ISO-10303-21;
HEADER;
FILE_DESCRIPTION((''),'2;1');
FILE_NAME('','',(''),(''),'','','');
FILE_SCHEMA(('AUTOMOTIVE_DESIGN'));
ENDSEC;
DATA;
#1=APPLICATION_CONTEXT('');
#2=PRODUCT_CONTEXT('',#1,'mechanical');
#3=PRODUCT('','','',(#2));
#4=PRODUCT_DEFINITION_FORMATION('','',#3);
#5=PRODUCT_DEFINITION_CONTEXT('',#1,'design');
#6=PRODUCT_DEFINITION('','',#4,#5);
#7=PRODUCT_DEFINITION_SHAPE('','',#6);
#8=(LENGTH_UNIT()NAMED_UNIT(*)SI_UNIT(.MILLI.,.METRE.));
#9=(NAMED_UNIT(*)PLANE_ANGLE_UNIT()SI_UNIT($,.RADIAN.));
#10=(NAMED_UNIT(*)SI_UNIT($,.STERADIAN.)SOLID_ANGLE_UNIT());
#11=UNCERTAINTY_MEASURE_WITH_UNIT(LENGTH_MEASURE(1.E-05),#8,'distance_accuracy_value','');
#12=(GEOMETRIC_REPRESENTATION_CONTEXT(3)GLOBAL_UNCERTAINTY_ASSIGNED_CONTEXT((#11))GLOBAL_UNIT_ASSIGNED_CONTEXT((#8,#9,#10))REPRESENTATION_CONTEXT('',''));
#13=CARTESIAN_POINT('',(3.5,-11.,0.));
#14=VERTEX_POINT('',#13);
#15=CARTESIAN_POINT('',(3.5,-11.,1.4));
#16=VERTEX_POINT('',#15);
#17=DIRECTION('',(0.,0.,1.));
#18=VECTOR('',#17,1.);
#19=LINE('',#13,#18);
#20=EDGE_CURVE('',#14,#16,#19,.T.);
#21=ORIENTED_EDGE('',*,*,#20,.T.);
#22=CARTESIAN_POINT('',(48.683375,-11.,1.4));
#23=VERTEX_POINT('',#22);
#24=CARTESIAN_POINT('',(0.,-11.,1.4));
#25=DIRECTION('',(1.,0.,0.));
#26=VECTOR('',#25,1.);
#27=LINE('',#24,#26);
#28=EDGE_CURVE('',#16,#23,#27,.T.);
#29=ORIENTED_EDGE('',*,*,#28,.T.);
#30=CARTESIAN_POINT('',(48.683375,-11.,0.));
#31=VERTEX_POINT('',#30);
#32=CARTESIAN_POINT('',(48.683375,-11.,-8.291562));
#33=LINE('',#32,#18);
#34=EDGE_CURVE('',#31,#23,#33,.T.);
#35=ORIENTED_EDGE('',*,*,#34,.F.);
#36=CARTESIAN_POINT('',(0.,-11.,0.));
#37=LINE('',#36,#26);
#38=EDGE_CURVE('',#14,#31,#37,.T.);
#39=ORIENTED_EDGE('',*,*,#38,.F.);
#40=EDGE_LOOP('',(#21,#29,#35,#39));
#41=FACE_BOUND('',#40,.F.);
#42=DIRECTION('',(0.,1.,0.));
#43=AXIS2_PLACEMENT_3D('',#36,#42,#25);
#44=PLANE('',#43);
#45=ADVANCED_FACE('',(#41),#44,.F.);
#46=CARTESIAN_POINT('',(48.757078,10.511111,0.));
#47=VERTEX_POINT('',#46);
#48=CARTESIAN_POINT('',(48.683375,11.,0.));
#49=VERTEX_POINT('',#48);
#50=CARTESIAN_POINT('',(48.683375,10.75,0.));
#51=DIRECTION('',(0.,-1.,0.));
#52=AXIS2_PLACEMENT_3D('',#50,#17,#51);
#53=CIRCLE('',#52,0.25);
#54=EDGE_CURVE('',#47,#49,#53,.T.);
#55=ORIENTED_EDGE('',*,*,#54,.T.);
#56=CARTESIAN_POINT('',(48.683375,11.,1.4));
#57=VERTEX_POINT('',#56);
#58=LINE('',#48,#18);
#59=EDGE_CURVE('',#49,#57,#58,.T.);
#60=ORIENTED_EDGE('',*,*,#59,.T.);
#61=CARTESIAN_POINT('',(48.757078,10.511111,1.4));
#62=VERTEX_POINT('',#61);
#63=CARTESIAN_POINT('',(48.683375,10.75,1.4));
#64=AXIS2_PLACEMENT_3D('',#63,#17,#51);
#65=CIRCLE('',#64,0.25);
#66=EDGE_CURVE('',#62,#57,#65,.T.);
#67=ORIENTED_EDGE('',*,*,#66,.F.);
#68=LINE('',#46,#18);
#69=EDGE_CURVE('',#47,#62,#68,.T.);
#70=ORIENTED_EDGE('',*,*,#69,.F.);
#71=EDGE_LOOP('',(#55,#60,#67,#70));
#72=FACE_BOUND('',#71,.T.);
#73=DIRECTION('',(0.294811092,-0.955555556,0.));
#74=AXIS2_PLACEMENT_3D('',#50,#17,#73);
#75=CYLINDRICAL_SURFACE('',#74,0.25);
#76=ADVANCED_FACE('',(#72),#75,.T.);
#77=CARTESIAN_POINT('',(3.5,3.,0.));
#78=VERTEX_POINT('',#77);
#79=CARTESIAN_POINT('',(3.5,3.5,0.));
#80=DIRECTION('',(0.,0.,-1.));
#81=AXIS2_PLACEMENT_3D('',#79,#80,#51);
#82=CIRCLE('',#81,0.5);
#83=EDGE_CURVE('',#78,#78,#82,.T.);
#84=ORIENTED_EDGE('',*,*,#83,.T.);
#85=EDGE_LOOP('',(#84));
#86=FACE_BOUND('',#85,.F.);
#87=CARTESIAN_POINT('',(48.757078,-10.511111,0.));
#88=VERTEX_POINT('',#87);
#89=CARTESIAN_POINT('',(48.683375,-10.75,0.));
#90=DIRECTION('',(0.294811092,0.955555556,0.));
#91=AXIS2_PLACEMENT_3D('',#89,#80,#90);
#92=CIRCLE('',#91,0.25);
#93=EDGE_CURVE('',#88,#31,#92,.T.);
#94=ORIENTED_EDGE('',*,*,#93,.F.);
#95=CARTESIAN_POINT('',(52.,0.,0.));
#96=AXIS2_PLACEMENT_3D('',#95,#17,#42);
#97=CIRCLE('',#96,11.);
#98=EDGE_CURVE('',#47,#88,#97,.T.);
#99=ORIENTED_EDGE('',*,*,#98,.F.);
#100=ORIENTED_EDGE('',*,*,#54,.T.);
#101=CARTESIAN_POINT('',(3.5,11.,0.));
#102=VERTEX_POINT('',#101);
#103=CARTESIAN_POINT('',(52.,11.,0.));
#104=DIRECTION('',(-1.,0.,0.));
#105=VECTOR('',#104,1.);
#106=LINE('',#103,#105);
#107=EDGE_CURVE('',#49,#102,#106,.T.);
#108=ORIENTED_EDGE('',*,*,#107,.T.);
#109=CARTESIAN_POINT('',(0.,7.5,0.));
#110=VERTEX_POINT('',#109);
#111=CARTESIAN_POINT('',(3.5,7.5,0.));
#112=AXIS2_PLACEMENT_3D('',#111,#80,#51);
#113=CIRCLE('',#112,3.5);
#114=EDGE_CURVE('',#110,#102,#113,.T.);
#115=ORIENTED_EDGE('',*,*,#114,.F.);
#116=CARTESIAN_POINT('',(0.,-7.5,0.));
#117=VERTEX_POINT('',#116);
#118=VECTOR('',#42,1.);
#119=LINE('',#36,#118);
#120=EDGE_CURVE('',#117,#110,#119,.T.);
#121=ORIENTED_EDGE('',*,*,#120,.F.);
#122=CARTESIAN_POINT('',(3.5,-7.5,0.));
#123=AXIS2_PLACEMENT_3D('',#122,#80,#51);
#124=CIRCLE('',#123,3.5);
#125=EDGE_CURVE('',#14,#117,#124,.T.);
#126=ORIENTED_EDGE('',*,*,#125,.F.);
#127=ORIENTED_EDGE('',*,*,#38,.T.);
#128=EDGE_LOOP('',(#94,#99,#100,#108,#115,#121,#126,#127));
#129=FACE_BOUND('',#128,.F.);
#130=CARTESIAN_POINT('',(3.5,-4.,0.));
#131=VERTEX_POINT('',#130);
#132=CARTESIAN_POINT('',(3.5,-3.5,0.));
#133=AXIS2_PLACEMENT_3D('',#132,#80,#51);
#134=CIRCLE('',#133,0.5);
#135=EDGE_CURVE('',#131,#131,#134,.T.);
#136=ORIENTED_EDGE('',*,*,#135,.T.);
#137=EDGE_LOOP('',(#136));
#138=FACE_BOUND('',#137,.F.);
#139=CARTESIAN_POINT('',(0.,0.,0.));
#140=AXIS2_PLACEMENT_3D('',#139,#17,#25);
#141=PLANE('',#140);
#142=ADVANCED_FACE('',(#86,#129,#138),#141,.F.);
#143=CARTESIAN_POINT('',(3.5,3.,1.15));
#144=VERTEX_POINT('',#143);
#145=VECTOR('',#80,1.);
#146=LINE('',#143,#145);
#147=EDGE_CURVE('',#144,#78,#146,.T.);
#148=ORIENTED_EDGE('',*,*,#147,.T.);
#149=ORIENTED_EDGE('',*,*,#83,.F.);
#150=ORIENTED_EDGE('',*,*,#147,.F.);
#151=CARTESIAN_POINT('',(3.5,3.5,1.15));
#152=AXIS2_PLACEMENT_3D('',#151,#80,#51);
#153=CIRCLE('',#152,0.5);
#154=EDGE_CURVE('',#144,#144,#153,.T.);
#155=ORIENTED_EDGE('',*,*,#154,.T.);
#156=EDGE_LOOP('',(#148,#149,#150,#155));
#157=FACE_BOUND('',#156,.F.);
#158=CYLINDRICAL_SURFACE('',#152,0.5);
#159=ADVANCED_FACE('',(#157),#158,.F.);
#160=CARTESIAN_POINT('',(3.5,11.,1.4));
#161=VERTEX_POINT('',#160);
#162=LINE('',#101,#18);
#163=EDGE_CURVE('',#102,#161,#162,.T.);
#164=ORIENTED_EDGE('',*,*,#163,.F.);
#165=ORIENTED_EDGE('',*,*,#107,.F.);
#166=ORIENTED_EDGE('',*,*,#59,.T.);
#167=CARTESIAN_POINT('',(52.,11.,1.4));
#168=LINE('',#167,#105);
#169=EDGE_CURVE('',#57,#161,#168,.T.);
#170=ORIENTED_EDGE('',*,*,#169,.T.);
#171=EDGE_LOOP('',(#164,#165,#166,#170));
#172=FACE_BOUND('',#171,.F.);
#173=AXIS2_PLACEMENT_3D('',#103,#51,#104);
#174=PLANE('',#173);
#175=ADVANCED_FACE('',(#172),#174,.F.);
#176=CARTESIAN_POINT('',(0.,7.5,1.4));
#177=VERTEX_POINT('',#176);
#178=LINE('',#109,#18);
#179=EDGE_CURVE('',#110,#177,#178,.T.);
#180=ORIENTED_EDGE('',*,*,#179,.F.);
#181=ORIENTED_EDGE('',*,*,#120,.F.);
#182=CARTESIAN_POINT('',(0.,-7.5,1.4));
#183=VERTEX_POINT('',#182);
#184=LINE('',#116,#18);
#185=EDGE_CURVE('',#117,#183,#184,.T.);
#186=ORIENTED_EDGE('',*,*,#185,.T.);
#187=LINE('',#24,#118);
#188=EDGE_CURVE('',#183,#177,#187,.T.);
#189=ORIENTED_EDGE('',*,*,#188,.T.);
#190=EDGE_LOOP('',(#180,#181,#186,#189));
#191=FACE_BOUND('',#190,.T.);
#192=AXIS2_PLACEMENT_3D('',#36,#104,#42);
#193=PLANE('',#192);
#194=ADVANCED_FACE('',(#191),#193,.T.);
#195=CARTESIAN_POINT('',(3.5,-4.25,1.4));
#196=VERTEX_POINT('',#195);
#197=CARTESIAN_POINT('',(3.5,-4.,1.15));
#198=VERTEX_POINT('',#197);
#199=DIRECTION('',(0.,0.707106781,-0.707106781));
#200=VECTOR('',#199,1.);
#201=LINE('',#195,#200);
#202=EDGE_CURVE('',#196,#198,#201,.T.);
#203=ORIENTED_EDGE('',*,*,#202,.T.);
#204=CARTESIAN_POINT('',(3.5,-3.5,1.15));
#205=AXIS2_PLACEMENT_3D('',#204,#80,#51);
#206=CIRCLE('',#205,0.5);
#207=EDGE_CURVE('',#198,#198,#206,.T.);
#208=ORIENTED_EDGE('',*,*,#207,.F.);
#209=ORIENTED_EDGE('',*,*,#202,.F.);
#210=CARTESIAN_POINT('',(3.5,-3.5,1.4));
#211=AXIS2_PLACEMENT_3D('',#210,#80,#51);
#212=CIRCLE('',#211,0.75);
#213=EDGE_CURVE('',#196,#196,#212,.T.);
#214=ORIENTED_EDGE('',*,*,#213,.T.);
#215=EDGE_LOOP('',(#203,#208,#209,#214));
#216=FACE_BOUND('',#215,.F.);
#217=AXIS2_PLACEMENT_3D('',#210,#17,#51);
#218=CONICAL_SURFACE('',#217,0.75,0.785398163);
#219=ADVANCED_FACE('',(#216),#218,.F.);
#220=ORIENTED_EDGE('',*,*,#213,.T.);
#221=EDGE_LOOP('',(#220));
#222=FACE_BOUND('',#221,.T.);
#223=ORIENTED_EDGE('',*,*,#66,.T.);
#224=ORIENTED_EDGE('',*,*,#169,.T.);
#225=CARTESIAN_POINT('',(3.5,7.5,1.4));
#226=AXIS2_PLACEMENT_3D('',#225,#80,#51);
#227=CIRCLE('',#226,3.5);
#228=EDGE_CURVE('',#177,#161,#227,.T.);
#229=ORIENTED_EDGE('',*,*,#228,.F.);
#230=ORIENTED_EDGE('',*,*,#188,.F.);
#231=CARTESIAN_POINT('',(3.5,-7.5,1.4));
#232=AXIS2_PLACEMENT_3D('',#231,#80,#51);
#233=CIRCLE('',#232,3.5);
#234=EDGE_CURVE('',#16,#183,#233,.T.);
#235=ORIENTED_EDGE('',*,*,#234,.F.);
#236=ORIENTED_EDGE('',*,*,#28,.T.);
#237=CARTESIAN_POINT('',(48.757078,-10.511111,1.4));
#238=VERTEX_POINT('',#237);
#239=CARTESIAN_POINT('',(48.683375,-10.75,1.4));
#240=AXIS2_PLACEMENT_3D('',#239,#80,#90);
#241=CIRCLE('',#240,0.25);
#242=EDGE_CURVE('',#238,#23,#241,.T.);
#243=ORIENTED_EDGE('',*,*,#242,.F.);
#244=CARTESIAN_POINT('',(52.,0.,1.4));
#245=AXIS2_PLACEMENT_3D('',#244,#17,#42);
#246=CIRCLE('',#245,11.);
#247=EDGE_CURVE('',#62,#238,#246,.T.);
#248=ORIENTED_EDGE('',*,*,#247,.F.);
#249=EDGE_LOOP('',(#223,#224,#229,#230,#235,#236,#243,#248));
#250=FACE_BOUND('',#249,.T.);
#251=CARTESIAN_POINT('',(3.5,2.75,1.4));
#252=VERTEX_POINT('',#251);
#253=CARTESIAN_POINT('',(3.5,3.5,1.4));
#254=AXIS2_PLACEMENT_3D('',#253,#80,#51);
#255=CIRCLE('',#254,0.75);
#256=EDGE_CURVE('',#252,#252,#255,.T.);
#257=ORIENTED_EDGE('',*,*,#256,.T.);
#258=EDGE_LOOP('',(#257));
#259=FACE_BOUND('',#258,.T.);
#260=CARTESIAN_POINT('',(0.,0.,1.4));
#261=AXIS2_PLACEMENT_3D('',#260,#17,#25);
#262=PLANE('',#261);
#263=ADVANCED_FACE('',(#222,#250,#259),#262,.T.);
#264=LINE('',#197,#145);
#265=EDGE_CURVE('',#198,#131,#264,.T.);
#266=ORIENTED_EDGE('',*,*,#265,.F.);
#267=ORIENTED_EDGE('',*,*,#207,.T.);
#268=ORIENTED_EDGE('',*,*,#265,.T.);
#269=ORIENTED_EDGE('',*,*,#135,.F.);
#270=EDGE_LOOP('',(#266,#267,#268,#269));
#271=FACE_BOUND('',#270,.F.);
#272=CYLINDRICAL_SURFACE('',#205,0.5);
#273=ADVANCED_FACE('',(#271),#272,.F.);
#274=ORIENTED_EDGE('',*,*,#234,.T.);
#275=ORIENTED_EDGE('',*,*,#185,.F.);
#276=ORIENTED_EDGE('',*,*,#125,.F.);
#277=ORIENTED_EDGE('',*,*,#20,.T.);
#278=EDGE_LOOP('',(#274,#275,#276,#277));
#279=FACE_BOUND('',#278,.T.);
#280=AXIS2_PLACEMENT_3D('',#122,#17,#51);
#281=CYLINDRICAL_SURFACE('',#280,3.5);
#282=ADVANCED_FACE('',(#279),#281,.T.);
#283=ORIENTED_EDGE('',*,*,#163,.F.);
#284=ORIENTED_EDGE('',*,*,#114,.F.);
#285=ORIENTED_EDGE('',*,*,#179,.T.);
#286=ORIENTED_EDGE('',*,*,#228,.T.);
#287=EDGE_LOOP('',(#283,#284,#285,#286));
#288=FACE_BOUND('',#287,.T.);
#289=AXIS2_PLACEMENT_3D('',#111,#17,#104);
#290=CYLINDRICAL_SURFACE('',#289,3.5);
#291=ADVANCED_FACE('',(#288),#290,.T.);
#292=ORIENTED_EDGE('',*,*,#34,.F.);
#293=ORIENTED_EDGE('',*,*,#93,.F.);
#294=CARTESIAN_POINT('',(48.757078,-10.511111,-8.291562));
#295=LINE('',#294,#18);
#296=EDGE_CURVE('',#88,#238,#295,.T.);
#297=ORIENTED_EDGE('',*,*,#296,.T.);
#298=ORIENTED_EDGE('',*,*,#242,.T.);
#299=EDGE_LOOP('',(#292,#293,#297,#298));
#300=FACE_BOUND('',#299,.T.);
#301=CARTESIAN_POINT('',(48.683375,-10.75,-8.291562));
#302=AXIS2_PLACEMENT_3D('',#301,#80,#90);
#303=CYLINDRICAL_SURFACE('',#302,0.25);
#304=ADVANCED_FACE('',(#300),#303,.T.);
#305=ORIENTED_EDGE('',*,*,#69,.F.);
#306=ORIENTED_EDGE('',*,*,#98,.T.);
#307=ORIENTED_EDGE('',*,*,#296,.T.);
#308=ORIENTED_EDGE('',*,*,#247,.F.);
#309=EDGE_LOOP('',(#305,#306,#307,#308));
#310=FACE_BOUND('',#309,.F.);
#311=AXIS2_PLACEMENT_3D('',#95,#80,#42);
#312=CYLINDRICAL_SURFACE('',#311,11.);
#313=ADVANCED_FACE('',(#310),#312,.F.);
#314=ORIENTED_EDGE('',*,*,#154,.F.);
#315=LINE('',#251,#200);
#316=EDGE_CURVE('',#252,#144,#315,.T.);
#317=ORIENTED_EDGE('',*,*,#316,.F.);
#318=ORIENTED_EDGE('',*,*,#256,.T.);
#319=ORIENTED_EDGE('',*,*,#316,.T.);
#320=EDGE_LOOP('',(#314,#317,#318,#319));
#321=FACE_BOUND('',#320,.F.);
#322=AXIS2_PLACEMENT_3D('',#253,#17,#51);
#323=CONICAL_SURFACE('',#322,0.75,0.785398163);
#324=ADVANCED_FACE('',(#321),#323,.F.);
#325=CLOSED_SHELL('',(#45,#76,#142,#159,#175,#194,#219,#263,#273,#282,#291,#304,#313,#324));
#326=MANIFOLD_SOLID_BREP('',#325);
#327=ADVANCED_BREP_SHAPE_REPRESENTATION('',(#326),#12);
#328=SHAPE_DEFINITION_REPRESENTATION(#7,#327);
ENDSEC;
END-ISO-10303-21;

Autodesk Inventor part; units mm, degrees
ref_plane "YZ Plane" through (0, 0, 0) normal (1, 0, 0) x (0, 1, 0)
ref_plane "XZ Plane" through (0, 0, 0) normal (0, 1, 0) x (-1, 0, 0)
ref_plane "XY Plane" through (0, 0, 0) normal (0, 0, 1) x (1, 0, 0)
sketch "Эскиз1" plane through (0, 0, 0) normal (0, 0, 1) x (1, 0, 0)
  line L0 (52, 11) -> (0, 11)
  line L1 (0, -11) -> (52, -11)
  arc A0 (52, 11) -> (52, -11) centre (52, 0) ccw
  line L2 (0, -11) -> (0, 11)
  line L3 (0, 0) -> (41, 0) construction
  line L4 (0, 0) -> (0, 11) construction
  line L5 (0, 11) -> (0, 11.25)
  point P0 (20.5, 0)
  dimension "d0" = 11
  dimension "d47" = 41
extrude "Выдавливание3" add sketch "Эскиз1" along normal blind 1.4
fillet "Сопряжение3" radius 0.25 2 edges at (52, 11, 0.7) (52, -11, 0.7)
fillet "Сопряжение4" radius 3.5 2 edges at (0, -11, 0.7) (0, 11, 0.7)
sketch "Эскиз6" plane through (0, 0, 1.4) normal (0, 0, 1) x (1, 0, 0)
  arc A0 (48.7571, 10.5111) -> (48.7571, -10.5111) centre (52, 0) ccw construction
  line L0 (41, 0) -> (0, 0) construction
  line L1 (0, -11) -> (0, 11) construction
  circle A1 centre (3.5, 3.5) radius 0.5
  line L2 (3.5, 3.5) -> (0, 3.5) construction
  line L3 (3.5, 3.5) -> (3.5, 0) construction
  circle A2 centre (3.5, -3.5) radius 0.5
  point P0 (48.6834, -11)
  dimension "d58" = 1
  dimension "d59" = 3.5
hole "Отверстие1" at (3.5, -3.5, 1.4) at (3.5, 3.5, 1.4) direction (0, 0, -1) diameter 1 end through all countersink diameter 1.5 countersink angle 90
properties part number "Поршень"
